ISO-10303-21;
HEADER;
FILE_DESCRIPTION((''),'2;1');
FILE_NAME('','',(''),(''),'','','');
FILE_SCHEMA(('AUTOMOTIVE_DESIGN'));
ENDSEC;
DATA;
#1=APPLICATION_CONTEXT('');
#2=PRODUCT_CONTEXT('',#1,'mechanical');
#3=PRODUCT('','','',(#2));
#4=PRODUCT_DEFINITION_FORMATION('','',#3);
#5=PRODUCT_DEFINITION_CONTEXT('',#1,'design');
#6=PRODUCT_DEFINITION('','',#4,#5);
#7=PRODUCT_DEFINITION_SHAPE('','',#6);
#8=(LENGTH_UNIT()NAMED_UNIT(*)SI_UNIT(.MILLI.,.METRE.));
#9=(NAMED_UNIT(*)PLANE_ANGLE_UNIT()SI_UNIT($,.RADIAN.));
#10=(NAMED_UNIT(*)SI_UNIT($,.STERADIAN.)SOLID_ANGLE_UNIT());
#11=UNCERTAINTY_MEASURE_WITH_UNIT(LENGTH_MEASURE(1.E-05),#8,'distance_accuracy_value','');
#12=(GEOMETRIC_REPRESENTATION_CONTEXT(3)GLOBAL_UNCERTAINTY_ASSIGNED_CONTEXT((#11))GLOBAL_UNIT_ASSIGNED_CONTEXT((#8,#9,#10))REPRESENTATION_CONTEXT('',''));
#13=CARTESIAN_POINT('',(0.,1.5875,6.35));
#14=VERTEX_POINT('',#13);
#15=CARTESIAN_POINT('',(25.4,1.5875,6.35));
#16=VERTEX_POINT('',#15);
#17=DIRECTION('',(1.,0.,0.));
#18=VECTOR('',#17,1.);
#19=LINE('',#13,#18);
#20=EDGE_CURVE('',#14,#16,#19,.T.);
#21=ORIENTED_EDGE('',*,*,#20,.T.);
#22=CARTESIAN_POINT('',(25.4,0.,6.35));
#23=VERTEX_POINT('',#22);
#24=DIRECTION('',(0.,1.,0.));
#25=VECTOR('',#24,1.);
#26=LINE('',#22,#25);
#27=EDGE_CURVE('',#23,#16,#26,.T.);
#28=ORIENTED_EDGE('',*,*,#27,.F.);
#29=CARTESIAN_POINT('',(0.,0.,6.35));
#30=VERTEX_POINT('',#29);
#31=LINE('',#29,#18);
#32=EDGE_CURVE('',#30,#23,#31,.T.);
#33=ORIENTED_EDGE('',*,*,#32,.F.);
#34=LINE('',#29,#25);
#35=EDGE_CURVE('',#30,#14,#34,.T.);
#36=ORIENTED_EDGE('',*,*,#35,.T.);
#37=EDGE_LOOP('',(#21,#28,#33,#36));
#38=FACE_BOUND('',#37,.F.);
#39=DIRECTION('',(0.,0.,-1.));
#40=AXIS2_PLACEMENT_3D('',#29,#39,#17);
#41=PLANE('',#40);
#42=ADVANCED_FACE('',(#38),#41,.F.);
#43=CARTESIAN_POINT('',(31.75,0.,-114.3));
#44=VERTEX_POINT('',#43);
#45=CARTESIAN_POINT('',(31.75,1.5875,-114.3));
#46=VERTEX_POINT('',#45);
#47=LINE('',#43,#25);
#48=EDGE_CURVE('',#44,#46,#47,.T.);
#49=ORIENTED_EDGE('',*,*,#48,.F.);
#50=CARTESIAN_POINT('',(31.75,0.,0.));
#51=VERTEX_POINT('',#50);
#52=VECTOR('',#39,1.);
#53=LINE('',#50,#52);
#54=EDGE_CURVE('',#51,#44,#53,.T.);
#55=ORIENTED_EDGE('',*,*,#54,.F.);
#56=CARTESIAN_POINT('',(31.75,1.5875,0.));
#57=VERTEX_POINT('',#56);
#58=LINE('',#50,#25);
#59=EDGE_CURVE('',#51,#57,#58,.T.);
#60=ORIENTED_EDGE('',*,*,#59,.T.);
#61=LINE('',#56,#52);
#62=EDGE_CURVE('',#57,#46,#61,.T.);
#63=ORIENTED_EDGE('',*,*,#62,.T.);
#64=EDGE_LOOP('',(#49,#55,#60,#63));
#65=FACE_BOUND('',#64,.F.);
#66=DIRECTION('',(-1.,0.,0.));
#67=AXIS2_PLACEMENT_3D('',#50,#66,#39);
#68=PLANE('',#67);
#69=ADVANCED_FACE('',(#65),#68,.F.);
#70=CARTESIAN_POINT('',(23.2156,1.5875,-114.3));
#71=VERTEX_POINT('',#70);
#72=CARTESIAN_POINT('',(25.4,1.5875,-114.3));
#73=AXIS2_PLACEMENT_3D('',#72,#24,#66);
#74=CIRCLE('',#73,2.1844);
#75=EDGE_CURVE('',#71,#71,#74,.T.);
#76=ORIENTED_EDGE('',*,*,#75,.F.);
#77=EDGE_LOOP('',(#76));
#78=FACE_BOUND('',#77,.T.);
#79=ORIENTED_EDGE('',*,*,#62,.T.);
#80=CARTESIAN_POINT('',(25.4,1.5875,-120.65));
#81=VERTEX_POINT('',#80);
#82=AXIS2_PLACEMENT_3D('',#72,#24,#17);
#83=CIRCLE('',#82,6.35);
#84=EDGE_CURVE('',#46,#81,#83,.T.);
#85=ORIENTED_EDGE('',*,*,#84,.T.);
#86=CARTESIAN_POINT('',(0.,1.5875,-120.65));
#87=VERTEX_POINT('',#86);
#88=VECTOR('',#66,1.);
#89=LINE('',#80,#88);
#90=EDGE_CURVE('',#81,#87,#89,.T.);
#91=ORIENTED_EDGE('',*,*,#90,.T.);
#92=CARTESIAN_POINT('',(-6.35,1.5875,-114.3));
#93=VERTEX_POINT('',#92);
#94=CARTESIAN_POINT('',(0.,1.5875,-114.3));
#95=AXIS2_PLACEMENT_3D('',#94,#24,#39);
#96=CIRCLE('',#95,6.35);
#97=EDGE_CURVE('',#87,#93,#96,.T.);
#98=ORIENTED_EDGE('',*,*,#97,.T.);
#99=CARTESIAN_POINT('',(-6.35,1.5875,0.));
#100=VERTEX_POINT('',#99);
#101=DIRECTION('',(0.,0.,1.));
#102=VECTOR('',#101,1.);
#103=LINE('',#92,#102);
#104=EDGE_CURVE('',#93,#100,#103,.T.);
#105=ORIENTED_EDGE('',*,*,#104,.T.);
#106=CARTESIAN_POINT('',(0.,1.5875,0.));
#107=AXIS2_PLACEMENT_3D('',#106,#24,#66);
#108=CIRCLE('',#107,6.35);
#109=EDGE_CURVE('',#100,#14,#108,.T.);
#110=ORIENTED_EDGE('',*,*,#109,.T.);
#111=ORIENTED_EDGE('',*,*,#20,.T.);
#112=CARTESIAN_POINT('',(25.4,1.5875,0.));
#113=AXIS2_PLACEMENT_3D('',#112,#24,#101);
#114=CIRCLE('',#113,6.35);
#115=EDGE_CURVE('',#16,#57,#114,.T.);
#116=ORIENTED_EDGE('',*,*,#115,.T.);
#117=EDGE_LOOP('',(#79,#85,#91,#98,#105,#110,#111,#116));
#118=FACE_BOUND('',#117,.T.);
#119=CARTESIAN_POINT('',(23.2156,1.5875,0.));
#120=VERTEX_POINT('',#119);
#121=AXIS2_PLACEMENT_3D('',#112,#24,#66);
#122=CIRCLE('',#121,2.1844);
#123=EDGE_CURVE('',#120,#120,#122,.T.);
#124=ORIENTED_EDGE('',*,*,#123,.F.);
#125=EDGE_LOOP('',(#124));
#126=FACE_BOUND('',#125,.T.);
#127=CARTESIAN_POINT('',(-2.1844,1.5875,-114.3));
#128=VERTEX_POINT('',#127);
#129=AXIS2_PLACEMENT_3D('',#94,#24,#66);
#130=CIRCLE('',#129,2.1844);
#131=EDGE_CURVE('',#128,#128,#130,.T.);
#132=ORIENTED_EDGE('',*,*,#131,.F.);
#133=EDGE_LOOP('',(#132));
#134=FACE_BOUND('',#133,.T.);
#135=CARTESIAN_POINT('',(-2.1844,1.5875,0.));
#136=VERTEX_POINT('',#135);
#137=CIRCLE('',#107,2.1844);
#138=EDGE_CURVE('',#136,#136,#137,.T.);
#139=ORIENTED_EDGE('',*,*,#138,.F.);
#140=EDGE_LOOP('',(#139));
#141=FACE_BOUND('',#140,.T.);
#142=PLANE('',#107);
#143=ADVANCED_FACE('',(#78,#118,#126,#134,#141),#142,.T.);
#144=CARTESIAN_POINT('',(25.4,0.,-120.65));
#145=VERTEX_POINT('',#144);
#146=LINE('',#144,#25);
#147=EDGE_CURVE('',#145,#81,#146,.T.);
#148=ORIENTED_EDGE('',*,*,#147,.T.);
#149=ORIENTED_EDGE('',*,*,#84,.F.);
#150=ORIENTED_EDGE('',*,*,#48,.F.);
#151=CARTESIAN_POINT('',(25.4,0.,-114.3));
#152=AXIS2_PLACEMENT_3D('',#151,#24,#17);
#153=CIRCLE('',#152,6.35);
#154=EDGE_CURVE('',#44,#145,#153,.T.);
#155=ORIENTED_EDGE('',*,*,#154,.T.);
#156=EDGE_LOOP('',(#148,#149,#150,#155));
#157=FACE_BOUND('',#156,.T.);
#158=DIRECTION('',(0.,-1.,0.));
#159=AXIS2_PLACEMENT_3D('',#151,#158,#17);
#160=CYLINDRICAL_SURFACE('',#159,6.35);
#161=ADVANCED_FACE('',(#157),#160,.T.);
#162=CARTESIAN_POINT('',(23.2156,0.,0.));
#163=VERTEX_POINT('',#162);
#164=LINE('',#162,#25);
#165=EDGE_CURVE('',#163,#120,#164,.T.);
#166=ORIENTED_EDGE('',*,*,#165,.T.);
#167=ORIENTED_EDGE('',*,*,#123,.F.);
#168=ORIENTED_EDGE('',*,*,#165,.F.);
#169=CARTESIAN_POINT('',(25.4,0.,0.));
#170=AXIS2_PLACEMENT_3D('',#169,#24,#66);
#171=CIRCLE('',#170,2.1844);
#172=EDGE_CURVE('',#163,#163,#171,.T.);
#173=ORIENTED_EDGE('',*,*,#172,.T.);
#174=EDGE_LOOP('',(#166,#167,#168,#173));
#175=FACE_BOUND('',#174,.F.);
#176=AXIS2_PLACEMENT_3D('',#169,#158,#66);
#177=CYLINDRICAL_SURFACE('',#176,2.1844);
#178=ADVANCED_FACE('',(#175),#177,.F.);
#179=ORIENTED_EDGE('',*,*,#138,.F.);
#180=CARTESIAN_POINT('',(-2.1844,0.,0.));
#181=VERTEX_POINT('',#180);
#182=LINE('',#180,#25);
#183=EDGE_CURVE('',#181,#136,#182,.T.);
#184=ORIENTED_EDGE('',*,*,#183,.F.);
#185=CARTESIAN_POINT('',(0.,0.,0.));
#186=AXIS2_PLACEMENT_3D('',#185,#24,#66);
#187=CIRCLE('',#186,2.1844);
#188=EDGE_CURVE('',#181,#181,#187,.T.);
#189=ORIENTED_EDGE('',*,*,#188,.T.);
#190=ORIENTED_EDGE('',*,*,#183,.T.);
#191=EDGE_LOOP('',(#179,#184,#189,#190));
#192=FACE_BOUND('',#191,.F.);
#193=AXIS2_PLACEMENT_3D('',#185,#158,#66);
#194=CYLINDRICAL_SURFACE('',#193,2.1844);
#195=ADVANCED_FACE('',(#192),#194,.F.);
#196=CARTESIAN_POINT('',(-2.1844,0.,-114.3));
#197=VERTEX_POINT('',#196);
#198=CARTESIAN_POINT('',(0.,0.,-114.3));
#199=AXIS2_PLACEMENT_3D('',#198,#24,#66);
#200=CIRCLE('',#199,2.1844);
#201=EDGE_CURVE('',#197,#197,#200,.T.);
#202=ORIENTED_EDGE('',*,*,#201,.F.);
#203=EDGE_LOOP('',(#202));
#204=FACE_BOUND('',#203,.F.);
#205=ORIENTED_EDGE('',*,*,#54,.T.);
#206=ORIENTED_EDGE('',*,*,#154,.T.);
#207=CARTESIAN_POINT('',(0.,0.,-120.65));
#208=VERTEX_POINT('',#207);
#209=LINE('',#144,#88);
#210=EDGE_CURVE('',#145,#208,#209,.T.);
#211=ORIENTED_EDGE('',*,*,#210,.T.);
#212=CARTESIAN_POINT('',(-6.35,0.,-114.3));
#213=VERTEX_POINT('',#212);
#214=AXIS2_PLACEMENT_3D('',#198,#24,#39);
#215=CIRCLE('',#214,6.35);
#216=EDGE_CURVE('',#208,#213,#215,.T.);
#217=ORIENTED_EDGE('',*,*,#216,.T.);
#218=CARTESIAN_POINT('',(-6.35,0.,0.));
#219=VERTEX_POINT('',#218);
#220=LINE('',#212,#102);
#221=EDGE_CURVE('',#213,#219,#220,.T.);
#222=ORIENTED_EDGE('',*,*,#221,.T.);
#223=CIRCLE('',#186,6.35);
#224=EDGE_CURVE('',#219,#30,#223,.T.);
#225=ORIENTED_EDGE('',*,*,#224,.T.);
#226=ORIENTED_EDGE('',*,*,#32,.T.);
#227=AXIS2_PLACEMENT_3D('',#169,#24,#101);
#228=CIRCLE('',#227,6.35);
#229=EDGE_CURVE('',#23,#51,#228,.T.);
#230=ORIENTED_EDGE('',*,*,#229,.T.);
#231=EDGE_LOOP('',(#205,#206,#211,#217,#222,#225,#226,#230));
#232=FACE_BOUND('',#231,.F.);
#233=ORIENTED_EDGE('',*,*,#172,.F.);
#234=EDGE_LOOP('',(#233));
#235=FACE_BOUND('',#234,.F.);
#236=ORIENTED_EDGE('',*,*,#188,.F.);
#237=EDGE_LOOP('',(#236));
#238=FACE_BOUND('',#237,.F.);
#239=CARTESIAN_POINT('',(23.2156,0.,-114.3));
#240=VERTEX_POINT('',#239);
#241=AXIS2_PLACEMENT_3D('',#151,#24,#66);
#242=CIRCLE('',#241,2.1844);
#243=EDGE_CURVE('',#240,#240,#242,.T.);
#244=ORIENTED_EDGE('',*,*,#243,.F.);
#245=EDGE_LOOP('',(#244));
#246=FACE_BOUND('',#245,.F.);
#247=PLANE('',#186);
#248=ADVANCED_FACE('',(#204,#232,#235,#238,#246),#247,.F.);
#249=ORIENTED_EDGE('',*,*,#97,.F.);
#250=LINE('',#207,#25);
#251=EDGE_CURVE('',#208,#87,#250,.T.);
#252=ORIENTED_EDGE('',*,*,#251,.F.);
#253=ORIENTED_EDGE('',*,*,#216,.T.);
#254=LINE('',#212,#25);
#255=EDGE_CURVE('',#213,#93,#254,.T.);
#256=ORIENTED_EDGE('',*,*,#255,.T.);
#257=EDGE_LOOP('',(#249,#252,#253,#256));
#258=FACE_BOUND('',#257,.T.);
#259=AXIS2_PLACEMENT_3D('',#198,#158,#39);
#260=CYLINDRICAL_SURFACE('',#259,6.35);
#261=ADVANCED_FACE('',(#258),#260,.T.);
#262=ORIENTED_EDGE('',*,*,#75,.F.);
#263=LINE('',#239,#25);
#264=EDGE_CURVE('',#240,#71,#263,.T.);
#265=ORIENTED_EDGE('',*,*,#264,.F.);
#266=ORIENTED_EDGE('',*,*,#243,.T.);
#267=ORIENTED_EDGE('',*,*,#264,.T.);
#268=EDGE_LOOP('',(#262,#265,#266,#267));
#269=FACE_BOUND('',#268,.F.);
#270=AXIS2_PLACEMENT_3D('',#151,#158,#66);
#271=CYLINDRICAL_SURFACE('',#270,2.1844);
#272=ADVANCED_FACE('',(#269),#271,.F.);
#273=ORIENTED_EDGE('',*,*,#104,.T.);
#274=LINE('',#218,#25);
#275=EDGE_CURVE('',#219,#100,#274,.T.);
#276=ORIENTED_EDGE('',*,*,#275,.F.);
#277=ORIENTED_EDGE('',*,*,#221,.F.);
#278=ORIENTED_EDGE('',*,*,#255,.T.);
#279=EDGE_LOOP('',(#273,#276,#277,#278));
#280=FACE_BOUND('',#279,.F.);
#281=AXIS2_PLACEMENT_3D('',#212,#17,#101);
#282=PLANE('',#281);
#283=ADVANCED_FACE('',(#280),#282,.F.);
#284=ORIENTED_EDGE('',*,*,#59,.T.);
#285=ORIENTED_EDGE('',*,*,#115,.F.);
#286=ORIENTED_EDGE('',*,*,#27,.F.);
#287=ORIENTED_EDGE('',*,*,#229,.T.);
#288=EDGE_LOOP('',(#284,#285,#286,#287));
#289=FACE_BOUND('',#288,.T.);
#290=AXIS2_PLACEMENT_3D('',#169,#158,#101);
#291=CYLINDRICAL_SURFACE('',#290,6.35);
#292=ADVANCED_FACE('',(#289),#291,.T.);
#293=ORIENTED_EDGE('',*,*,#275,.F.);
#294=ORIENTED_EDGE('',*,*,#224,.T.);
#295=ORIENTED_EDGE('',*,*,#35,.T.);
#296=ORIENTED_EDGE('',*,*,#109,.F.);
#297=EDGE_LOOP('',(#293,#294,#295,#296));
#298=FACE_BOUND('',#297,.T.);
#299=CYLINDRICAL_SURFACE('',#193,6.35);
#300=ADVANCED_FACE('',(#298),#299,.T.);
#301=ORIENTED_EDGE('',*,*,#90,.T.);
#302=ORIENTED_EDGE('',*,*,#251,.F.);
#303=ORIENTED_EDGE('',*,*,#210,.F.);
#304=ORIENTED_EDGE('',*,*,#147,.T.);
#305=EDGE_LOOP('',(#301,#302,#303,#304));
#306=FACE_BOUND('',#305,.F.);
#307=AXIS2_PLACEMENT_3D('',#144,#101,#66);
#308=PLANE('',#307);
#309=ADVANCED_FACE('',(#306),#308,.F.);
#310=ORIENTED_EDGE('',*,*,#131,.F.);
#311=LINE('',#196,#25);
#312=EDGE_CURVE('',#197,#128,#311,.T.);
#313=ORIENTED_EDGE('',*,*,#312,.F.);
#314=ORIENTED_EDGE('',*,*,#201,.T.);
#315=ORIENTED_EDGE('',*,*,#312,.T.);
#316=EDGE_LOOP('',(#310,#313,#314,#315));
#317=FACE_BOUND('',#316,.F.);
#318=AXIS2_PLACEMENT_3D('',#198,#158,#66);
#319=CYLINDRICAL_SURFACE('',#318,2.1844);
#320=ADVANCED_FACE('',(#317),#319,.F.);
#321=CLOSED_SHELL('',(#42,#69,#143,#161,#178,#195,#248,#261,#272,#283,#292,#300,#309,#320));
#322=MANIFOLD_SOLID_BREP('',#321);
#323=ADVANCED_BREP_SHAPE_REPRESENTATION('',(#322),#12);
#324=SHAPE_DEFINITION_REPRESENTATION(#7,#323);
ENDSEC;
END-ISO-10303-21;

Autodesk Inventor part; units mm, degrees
ref_plane "YZ Plane" through (0, 0, 0) normal (1, 0, 0) x (0, 1, 0)
ref_plane "XZ Plane" through (0, 0, 0) normal (0, 1, 0) x (-1, 0, 0)
ref_plane "XY Plane" through (0, 0, 0) normal (0, 0, 1) x (1, 0, 0)
sketch "main" plane through (0, 0, 0) normal (0, 0, 1) x (1, 0, 0)
  circle A0 centre (-11.9584, 56.4908) radius 2.1844
  circle A1 centre (13.4416, 56.4908) radius 2.1844
  circle A2 centre (13.4416, -57.8092) radius 2.1844
  circle A3 centre (-11.9584, -57.8092) radius 2.1844
  arc A4 (19.7916, 56.4908) -> (13.4416, 62.8408) centre (13.4416, 56.4908) ccw
  arc A5 (-11.9584, 62.8408) -> (-18.3084, 56.4908) centre (-11.9584, 56.4908) ccw
  arc A6 (-18.3084, -57.8092) -> (-11.9584, -64.1592) centre (-11.9584, -57.8092) ccw
  arc A7 (13.4416, -64.1592) -> (19.7916, -57.8092) centre (13.4416, -57.8092) ccw
  line L0 (13.4416, 62.8408) -> (-11.9584, 62.8408)
  line L1 (-18.3084, 56.4908) -> (-18.3084, -57.8092)
  line L2 (-11.9584, -64.1592) -> (13.4416, -64.1592)
  line L3 (19.7916, -57.8092) -> (19.7916, 56.4908)
  point P0 (0.7416, -0.6592)
  dimension "d0" = 12.7
  dimension "d1" = 12.7
  dimension "d2" = 12.7
  dimension "d3" = 12.7
sketch "Sketch1" plane through (0, 0, 0) normal (0, 1, 0) x (-1, 0, 0)
  circle A0 centre (-25.4, 0) radius 2.1844
  circle A1 centre (0, 0) radius 2.1844
  circle A2 centre (0, -114.3) radius 2.1844
  circle A3 centre (-25.4, -114.3) radius 2.1844
  arc A4 (6.35, 0) -> (0, 6.35) centre (0, 0) ccw
  arc A5 (-25.4, 6.35) -> (-31.75, 0) centre (-25.4, 0) ccw
  arc A6 (-31.75, -114.3) -> (-25.4, -120.65) centre (-25.4, -114.3) ccw
  arc A7 (0, -120.65) -> (6.35, -114.3) centre (0, -114.3) ccw
  line L0 (0, 6.35) -> (-25.4, 6.35)
  line L1 (-31.75, 0) -> (-31.75, -114.3)
  line L2 (-25.4, -120.65) -> (0, -120.65)
  line L3 (6.35, -114.3) -> (6.35, 0)
extrude "Extrusion1" add sketch "Sketch1" along normal blind 1.5875
properties part number "Brace Gusset" material "Acetal Resin, White"
